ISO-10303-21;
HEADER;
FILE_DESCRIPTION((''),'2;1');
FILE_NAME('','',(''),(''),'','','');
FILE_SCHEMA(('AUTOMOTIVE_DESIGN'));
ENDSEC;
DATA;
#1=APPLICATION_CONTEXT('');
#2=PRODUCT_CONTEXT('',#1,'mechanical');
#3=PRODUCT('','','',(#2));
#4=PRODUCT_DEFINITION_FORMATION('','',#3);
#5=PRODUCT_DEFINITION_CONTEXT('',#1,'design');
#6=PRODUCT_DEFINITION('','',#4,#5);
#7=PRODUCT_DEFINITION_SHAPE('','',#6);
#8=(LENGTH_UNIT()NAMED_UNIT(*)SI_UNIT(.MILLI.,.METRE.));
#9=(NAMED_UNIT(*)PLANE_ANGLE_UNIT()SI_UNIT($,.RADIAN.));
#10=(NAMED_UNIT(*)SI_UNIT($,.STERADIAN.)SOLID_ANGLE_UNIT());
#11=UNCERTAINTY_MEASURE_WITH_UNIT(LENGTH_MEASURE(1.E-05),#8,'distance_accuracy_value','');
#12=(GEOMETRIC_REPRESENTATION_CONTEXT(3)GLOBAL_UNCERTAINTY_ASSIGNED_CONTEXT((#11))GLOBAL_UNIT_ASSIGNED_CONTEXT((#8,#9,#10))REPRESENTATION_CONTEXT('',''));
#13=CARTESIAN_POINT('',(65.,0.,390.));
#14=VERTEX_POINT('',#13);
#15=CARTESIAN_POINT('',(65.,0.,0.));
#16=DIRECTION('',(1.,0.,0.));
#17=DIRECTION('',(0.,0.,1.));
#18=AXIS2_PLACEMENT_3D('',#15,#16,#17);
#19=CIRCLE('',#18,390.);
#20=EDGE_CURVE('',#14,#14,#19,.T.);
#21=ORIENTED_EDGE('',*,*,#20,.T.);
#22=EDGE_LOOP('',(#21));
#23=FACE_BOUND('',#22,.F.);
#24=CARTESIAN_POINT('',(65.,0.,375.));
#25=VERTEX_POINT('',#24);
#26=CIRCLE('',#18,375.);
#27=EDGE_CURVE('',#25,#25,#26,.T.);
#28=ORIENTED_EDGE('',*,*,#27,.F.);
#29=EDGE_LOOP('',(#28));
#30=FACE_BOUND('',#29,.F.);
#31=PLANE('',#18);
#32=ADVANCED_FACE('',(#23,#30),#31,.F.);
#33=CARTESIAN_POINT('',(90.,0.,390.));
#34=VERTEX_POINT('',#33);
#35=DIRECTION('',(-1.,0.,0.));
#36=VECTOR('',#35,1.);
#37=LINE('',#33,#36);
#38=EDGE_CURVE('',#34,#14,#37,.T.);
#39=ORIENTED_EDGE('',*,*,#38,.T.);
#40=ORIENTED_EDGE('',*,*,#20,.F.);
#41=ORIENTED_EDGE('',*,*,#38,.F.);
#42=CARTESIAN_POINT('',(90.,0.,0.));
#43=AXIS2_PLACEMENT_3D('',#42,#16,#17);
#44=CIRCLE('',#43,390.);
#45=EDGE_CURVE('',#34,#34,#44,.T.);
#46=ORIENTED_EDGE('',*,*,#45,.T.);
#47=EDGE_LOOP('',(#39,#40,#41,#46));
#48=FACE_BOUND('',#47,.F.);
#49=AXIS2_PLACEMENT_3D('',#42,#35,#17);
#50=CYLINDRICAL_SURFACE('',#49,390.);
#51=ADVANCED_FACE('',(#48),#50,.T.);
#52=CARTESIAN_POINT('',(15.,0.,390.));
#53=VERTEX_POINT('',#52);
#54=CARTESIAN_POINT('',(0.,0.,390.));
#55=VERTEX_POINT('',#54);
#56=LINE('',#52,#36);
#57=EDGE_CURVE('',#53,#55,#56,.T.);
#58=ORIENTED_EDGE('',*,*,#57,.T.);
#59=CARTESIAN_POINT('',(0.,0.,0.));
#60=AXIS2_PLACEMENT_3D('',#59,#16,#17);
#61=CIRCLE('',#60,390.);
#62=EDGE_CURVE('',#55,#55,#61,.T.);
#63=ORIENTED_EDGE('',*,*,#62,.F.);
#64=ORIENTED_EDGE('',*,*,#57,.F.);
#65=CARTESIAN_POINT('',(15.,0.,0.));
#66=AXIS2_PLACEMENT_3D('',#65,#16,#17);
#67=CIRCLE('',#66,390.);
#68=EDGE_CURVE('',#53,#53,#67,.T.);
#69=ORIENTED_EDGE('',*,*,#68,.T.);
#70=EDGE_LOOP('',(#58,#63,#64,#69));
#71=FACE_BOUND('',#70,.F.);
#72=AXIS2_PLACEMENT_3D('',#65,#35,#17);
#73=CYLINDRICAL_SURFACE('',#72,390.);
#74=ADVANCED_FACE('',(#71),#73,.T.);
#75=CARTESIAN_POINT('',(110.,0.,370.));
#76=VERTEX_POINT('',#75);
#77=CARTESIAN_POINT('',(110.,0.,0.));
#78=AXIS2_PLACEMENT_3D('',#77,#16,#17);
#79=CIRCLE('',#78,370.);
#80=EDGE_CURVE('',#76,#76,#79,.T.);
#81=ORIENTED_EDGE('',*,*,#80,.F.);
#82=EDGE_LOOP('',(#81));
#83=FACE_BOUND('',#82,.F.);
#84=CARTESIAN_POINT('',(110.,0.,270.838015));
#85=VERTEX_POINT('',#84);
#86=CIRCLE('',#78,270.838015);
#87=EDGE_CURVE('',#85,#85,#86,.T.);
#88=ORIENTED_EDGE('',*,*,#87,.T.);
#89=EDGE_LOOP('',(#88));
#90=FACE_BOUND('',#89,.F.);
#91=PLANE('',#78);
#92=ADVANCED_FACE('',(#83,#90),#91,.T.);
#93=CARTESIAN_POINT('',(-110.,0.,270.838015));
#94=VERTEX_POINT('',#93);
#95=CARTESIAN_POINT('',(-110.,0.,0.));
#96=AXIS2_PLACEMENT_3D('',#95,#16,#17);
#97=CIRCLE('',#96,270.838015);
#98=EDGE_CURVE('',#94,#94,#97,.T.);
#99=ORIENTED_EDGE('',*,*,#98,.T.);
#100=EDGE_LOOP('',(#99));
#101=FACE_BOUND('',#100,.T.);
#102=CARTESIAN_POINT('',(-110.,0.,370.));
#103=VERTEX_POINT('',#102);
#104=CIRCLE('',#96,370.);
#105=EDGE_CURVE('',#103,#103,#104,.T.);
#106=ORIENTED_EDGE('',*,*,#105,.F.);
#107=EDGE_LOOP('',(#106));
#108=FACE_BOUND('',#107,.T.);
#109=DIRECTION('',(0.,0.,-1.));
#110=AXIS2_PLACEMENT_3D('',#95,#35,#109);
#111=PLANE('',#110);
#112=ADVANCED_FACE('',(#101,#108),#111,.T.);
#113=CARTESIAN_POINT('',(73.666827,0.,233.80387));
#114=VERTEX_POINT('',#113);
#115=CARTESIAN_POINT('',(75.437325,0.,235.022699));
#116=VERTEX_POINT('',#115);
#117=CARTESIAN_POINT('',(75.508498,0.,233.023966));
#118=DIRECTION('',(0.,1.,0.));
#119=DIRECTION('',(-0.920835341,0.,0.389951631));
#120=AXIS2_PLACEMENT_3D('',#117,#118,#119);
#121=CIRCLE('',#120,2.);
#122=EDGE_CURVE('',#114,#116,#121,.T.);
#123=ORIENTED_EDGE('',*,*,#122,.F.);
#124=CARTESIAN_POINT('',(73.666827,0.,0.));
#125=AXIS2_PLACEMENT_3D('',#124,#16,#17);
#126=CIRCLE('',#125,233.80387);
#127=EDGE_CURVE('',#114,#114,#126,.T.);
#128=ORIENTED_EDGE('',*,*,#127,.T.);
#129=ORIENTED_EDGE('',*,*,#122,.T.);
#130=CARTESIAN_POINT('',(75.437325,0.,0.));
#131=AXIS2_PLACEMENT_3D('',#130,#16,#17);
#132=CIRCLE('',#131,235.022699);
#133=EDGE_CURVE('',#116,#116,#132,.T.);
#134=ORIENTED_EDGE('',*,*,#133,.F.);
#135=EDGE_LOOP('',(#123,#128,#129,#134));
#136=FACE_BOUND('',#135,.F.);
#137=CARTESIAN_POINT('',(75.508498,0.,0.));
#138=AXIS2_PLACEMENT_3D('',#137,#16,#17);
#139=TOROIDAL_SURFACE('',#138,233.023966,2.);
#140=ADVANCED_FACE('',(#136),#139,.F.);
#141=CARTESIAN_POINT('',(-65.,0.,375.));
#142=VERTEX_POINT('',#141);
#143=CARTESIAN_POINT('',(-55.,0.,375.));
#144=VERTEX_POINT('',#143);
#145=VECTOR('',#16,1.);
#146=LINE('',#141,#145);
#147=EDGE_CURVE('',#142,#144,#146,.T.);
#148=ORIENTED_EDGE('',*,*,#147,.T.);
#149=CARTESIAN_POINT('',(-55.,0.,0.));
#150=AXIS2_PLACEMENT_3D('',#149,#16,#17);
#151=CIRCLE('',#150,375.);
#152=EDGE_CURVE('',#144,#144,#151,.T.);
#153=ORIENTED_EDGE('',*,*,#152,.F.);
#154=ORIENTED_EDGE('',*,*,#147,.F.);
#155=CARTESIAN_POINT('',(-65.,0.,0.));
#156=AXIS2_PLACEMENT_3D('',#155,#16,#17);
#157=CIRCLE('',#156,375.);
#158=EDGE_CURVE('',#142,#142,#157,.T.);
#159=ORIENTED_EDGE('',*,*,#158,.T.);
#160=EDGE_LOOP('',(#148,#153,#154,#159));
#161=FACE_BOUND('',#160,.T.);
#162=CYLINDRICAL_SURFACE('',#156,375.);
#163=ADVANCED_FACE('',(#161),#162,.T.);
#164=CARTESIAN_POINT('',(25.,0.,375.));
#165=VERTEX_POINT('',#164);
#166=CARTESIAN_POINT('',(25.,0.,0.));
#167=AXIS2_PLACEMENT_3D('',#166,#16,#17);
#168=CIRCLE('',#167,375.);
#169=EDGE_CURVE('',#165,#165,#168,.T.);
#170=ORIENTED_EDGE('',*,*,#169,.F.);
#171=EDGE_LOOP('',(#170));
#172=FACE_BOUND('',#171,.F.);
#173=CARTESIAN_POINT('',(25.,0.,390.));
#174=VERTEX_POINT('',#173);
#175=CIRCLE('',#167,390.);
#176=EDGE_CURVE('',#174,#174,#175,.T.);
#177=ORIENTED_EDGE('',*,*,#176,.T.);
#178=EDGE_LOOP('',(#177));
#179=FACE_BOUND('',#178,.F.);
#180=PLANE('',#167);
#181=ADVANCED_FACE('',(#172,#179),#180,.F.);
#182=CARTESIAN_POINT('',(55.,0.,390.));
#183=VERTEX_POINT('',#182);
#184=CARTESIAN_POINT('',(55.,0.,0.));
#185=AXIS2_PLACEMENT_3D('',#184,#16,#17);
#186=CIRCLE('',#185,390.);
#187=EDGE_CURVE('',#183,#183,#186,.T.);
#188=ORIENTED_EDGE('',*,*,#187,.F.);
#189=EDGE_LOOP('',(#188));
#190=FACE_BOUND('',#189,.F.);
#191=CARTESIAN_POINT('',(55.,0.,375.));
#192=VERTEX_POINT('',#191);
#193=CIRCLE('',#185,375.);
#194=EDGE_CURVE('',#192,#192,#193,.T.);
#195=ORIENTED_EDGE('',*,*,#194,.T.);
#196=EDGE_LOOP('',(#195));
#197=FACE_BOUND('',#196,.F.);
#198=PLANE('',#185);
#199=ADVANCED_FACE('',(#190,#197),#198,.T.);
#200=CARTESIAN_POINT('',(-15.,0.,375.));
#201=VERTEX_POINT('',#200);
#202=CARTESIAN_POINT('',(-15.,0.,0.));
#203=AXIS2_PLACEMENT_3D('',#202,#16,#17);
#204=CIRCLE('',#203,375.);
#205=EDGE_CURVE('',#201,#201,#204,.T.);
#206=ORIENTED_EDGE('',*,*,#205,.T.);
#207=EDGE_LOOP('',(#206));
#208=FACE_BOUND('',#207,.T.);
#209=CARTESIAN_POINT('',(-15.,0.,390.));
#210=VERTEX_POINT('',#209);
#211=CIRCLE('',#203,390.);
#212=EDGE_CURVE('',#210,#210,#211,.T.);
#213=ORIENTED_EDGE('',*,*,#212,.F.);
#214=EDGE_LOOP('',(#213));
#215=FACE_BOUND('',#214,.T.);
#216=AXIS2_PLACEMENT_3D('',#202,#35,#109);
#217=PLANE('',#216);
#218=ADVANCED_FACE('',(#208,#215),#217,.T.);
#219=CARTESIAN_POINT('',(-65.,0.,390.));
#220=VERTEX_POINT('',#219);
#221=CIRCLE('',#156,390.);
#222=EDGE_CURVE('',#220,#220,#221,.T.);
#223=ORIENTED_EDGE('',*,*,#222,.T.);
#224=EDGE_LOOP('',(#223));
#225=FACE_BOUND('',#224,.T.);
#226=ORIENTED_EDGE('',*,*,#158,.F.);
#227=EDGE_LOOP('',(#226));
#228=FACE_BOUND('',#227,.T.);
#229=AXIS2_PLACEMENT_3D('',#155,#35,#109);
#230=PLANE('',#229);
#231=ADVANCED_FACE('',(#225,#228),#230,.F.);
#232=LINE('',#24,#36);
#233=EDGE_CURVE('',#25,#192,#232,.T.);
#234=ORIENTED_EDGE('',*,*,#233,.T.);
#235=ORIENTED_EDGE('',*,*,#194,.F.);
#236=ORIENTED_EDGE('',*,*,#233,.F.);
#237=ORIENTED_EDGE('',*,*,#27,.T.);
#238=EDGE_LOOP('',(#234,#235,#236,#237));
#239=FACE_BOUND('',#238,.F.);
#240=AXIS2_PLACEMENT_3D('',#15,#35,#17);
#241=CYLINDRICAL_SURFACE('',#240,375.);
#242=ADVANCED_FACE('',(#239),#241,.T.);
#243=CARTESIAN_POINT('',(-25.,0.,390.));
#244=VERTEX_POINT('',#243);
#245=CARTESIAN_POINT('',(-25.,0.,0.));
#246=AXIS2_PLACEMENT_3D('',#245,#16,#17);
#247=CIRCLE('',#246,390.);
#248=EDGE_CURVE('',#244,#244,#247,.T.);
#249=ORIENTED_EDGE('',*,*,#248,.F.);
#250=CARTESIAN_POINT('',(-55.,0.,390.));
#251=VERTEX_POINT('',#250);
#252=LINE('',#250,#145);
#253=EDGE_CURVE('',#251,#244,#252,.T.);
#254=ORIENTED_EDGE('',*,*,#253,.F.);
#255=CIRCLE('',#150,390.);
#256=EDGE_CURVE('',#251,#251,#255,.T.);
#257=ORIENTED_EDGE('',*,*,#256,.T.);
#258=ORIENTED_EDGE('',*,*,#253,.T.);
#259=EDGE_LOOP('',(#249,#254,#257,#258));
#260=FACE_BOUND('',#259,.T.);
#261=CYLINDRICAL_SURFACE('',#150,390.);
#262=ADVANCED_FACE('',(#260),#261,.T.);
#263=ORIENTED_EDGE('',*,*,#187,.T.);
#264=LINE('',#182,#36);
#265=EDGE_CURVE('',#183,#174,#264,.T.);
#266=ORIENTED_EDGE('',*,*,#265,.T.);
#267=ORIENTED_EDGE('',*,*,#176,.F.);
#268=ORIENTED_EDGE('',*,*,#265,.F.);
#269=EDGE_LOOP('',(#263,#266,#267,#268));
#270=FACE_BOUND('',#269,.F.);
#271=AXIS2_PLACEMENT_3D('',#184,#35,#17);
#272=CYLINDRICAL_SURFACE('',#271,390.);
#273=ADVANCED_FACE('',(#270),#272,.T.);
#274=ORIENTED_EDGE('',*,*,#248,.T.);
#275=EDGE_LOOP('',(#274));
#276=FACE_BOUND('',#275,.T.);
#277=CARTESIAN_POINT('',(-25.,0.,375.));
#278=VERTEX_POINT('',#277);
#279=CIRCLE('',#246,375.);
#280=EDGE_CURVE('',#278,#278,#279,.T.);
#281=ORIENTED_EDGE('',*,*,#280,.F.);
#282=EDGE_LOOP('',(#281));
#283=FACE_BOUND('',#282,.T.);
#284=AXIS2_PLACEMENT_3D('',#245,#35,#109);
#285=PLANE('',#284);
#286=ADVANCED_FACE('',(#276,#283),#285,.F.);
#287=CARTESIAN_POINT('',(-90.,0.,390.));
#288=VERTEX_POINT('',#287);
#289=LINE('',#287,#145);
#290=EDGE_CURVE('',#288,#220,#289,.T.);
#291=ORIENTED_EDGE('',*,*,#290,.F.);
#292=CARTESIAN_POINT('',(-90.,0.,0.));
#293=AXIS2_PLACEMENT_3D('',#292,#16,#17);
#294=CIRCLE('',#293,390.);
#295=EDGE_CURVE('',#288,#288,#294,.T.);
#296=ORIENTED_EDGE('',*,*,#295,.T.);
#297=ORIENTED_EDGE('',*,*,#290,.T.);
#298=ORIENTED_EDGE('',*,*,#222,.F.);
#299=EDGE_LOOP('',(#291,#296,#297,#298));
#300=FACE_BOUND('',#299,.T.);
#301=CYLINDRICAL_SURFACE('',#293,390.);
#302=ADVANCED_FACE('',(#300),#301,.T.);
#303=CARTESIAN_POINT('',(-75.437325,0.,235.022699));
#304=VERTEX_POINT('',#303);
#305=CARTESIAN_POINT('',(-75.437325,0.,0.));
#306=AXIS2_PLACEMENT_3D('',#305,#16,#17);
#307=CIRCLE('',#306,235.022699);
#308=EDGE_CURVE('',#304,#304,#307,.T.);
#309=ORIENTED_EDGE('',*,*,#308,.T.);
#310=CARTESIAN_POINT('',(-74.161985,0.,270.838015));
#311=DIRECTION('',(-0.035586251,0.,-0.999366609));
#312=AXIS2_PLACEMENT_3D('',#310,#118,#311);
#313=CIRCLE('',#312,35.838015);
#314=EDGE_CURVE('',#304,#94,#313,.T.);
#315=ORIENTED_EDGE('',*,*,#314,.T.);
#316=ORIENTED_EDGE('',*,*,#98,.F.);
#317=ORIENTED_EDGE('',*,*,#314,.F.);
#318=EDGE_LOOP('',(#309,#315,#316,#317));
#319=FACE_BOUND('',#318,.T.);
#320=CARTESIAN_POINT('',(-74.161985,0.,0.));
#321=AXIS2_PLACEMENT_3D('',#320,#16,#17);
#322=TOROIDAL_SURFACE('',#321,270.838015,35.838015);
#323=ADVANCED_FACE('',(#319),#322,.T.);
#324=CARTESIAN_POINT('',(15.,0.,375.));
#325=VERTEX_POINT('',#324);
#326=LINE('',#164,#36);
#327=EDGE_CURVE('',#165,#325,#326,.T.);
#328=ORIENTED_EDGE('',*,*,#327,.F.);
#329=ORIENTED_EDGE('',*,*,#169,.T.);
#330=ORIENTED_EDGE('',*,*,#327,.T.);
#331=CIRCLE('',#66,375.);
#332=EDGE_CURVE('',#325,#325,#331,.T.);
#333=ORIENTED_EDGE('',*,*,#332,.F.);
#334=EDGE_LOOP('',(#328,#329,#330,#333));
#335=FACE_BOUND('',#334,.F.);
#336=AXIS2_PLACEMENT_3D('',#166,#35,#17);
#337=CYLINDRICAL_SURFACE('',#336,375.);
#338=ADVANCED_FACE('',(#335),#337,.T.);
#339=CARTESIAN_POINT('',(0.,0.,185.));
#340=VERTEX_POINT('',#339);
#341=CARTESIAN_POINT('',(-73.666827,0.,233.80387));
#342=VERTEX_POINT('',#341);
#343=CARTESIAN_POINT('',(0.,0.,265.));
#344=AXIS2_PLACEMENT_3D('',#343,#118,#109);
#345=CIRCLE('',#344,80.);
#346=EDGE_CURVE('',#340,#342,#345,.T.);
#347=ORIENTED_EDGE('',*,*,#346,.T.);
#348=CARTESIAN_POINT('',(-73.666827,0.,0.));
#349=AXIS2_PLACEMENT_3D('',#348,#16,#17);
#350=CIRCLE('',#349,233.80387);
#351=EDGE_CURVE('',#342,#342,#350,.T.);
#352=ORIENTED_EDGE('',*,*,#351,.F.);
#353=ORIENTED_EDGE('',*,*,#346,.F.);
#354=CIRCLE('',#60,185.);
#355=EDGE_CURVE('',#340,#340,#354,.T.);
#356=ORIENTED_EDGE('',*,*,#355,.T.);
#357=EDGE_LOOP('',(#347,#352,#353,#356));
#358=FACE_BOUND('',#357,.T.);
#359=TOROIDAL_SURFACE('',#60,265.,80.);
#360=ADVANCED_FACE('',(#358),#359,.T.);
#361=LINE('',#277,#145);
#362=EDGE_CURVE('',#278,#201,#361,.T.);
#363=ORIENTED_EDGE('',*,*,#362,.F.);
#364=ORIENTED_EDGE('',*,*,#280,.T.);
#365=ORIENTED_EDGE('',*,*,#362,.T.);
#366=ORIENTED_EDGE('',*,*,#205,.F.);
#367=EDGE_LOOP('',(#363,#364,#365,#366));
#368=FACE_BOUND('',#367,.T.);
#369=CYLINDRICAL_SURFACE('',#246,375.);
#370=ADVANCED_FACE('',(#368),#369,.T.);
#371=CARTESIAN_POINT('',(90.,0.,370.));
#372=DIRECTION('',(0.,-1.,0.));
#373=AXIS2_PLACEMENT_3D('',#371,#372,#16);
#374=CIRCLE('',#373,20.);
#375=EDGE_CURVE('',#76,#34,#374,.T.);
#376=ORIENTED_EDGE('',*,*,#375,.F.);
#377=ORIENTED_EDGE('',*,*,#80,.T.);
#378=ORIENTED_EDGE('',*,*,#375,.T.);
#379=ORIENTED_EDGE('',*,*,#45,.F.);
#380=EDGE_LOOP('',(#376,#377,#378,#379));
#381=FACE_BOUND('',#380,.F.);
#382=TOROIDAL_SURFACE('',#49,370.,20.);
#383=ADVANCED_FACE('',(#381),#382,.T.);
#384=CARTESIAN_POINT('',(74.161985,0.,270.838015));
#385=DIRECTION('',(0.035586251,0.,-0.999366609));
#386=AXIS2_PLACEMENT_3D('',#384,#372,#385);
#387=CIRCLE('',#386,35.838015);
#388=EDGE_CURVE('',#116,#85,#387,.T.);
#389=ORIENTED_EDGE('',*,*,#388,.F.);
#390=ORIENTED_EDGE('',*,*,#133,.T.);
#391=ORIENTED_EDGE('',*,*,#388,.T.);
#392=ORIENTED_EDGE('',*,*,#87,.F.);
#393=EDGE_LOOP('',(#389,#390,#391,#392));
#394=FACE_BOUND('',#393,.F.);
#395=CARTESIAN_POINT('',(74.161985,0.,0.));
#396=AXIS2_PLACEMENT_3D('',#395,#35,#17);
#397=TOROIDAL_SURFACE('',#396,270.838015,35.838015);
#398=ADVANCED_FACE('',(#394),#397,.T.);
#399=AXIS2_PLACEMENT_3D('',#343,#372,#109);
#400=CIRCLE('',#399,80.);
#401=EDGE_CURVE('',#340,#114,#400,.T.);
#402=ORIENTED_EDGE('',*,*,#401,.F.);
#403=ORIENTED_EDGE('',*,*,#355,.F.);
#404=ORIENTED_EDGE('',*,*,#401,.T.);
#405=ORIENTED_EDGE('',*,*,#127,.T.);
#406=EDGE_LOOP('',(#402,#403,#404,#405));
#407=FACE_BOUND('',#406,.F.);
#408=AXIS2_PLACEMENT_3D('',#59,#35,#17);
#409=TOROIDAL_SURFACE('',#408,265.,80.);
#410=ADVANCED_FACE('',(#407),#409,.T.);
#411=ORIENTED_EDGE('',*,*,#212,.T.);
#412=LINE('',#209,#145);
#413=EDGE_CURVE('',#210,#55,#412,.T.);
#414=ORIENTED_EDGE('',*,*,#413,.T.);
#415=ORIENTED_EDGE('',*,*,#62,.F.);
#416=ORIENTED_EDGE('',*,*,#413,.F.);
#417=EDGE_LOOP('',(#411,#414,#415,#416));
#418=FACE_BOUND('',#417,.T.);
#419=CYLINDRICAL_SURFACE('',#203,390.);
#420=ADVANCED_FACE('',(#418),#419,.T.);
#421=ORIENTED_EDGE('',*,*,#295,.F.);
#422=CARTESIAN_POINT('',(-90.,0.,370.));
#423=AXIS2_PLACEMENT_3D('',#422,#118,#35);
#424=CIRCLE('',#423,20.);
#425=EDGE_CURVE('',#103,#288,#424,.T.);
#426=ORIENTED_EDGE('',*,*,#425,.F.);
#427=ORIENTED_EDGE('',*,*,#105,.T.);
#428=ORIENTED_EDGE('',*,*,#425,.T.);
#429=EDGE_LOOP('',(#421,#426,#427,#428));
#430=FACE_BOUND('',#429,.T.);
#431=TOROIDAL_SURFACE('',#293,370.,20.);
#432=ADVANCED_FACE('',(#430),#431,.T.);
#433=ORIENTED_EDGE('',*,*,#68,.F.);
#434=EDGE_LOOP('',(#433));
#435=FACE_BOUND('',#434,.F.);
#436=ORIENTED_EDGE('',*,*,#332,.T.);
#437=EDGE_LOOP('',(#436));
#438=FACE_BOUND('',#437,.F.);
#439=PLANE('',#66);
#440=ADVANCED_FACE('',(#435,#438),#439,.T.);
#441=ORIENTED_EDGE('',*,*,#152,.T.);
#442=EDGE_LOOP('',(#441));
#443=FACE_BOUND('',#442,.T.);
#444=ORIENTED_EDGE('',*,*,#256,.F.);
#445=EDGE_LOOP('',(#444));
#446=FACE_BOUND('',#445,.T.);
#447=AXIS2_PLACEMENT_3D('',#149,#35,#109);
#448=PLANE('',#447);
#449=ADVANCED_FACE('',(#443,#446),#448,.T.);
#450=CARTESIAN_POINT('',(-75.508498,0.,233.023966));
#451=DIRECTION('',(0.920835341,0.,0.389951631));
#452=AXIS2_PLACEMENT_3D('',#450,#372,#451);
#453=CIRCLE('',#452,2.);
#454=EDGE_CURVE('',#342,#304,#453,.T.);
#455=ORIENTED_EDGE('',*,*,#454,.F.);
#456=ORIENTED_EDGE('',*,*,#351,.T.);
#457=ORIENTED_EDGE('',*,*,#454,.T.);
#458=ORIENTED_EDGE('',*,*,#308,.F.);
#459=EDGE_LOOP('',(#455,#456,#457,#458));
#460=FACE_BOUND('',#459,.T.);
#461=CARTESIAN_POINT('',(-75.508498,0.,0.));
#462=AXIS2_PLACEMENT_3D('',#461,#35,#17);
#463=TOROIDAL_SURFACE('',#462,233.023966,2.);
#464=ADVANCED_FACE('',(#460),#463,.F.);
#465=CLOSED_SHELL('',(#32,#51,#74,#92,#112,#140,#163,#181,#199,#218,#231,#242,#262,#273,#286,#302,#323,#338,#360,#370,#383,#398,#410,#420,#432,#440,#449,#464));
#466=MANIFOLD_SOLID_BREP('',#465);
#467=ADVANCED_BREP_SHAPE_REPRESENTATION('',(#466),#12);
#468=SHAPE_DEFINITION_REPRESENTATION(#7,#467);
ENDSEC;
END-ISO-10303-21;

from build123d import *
from build123d import SkipClean  # not in build123d's __all__


with BuildPart() as f1:
    # F0 (on Front) → F1 (revolve)
    with BuildSketch(Plane.XZ):
        with BuildLine():
            Line((25, 390), (25, 375))
            Line((25, 375), (15, 375))
            Line((15, 375), (15, 390))
            Line((15, 390), (0, 390))
            Line((0, 390), (0, 185))
            ThreePointArc((0, 185), (44.1831956873, 198.3078324025), (73.6668272943, 233.8038695285))
            ThreePointArc((73.6668272943, 233.8038695285), (74.3744217546, 234.6713493802), (75.4373254745, 235.0226994843))
            ThreePointArc((75.4373254745, 235.0226994843), (99.9502477461, 245.9516970753), (110, 270.838015129))
            Line((110, 270.838015129), (110, 370))
            ThreePointArc((110, 370), (104.1421356237, 384.1421356237), (90, 390))
            Line((90, 390), (65, 390))
            Line((65, 390), (65, 375))
            Line((65, 375), (55, 375))
            Line((55, 375), (55, 390))
            Line((55, 390), (25, 390))
        make_face()
    revolve(axis=Axis((33.0590110619, 0, 0), (1, 0, 0)))

    # F2: F1 across face


with BuildPart() as f1_1:
    add(f1.part, clean=False)
    with SkipClean():  # cleaning this boolean's faces spoils the solid; the shape is the same uncleaned
        add(f1.part.mirror(Plane(origin=(0, 0, 0), x_dir=(0, -1, 0), z_dir=(-1, 0, 0))), clean=False)


solid = f1_1.part
